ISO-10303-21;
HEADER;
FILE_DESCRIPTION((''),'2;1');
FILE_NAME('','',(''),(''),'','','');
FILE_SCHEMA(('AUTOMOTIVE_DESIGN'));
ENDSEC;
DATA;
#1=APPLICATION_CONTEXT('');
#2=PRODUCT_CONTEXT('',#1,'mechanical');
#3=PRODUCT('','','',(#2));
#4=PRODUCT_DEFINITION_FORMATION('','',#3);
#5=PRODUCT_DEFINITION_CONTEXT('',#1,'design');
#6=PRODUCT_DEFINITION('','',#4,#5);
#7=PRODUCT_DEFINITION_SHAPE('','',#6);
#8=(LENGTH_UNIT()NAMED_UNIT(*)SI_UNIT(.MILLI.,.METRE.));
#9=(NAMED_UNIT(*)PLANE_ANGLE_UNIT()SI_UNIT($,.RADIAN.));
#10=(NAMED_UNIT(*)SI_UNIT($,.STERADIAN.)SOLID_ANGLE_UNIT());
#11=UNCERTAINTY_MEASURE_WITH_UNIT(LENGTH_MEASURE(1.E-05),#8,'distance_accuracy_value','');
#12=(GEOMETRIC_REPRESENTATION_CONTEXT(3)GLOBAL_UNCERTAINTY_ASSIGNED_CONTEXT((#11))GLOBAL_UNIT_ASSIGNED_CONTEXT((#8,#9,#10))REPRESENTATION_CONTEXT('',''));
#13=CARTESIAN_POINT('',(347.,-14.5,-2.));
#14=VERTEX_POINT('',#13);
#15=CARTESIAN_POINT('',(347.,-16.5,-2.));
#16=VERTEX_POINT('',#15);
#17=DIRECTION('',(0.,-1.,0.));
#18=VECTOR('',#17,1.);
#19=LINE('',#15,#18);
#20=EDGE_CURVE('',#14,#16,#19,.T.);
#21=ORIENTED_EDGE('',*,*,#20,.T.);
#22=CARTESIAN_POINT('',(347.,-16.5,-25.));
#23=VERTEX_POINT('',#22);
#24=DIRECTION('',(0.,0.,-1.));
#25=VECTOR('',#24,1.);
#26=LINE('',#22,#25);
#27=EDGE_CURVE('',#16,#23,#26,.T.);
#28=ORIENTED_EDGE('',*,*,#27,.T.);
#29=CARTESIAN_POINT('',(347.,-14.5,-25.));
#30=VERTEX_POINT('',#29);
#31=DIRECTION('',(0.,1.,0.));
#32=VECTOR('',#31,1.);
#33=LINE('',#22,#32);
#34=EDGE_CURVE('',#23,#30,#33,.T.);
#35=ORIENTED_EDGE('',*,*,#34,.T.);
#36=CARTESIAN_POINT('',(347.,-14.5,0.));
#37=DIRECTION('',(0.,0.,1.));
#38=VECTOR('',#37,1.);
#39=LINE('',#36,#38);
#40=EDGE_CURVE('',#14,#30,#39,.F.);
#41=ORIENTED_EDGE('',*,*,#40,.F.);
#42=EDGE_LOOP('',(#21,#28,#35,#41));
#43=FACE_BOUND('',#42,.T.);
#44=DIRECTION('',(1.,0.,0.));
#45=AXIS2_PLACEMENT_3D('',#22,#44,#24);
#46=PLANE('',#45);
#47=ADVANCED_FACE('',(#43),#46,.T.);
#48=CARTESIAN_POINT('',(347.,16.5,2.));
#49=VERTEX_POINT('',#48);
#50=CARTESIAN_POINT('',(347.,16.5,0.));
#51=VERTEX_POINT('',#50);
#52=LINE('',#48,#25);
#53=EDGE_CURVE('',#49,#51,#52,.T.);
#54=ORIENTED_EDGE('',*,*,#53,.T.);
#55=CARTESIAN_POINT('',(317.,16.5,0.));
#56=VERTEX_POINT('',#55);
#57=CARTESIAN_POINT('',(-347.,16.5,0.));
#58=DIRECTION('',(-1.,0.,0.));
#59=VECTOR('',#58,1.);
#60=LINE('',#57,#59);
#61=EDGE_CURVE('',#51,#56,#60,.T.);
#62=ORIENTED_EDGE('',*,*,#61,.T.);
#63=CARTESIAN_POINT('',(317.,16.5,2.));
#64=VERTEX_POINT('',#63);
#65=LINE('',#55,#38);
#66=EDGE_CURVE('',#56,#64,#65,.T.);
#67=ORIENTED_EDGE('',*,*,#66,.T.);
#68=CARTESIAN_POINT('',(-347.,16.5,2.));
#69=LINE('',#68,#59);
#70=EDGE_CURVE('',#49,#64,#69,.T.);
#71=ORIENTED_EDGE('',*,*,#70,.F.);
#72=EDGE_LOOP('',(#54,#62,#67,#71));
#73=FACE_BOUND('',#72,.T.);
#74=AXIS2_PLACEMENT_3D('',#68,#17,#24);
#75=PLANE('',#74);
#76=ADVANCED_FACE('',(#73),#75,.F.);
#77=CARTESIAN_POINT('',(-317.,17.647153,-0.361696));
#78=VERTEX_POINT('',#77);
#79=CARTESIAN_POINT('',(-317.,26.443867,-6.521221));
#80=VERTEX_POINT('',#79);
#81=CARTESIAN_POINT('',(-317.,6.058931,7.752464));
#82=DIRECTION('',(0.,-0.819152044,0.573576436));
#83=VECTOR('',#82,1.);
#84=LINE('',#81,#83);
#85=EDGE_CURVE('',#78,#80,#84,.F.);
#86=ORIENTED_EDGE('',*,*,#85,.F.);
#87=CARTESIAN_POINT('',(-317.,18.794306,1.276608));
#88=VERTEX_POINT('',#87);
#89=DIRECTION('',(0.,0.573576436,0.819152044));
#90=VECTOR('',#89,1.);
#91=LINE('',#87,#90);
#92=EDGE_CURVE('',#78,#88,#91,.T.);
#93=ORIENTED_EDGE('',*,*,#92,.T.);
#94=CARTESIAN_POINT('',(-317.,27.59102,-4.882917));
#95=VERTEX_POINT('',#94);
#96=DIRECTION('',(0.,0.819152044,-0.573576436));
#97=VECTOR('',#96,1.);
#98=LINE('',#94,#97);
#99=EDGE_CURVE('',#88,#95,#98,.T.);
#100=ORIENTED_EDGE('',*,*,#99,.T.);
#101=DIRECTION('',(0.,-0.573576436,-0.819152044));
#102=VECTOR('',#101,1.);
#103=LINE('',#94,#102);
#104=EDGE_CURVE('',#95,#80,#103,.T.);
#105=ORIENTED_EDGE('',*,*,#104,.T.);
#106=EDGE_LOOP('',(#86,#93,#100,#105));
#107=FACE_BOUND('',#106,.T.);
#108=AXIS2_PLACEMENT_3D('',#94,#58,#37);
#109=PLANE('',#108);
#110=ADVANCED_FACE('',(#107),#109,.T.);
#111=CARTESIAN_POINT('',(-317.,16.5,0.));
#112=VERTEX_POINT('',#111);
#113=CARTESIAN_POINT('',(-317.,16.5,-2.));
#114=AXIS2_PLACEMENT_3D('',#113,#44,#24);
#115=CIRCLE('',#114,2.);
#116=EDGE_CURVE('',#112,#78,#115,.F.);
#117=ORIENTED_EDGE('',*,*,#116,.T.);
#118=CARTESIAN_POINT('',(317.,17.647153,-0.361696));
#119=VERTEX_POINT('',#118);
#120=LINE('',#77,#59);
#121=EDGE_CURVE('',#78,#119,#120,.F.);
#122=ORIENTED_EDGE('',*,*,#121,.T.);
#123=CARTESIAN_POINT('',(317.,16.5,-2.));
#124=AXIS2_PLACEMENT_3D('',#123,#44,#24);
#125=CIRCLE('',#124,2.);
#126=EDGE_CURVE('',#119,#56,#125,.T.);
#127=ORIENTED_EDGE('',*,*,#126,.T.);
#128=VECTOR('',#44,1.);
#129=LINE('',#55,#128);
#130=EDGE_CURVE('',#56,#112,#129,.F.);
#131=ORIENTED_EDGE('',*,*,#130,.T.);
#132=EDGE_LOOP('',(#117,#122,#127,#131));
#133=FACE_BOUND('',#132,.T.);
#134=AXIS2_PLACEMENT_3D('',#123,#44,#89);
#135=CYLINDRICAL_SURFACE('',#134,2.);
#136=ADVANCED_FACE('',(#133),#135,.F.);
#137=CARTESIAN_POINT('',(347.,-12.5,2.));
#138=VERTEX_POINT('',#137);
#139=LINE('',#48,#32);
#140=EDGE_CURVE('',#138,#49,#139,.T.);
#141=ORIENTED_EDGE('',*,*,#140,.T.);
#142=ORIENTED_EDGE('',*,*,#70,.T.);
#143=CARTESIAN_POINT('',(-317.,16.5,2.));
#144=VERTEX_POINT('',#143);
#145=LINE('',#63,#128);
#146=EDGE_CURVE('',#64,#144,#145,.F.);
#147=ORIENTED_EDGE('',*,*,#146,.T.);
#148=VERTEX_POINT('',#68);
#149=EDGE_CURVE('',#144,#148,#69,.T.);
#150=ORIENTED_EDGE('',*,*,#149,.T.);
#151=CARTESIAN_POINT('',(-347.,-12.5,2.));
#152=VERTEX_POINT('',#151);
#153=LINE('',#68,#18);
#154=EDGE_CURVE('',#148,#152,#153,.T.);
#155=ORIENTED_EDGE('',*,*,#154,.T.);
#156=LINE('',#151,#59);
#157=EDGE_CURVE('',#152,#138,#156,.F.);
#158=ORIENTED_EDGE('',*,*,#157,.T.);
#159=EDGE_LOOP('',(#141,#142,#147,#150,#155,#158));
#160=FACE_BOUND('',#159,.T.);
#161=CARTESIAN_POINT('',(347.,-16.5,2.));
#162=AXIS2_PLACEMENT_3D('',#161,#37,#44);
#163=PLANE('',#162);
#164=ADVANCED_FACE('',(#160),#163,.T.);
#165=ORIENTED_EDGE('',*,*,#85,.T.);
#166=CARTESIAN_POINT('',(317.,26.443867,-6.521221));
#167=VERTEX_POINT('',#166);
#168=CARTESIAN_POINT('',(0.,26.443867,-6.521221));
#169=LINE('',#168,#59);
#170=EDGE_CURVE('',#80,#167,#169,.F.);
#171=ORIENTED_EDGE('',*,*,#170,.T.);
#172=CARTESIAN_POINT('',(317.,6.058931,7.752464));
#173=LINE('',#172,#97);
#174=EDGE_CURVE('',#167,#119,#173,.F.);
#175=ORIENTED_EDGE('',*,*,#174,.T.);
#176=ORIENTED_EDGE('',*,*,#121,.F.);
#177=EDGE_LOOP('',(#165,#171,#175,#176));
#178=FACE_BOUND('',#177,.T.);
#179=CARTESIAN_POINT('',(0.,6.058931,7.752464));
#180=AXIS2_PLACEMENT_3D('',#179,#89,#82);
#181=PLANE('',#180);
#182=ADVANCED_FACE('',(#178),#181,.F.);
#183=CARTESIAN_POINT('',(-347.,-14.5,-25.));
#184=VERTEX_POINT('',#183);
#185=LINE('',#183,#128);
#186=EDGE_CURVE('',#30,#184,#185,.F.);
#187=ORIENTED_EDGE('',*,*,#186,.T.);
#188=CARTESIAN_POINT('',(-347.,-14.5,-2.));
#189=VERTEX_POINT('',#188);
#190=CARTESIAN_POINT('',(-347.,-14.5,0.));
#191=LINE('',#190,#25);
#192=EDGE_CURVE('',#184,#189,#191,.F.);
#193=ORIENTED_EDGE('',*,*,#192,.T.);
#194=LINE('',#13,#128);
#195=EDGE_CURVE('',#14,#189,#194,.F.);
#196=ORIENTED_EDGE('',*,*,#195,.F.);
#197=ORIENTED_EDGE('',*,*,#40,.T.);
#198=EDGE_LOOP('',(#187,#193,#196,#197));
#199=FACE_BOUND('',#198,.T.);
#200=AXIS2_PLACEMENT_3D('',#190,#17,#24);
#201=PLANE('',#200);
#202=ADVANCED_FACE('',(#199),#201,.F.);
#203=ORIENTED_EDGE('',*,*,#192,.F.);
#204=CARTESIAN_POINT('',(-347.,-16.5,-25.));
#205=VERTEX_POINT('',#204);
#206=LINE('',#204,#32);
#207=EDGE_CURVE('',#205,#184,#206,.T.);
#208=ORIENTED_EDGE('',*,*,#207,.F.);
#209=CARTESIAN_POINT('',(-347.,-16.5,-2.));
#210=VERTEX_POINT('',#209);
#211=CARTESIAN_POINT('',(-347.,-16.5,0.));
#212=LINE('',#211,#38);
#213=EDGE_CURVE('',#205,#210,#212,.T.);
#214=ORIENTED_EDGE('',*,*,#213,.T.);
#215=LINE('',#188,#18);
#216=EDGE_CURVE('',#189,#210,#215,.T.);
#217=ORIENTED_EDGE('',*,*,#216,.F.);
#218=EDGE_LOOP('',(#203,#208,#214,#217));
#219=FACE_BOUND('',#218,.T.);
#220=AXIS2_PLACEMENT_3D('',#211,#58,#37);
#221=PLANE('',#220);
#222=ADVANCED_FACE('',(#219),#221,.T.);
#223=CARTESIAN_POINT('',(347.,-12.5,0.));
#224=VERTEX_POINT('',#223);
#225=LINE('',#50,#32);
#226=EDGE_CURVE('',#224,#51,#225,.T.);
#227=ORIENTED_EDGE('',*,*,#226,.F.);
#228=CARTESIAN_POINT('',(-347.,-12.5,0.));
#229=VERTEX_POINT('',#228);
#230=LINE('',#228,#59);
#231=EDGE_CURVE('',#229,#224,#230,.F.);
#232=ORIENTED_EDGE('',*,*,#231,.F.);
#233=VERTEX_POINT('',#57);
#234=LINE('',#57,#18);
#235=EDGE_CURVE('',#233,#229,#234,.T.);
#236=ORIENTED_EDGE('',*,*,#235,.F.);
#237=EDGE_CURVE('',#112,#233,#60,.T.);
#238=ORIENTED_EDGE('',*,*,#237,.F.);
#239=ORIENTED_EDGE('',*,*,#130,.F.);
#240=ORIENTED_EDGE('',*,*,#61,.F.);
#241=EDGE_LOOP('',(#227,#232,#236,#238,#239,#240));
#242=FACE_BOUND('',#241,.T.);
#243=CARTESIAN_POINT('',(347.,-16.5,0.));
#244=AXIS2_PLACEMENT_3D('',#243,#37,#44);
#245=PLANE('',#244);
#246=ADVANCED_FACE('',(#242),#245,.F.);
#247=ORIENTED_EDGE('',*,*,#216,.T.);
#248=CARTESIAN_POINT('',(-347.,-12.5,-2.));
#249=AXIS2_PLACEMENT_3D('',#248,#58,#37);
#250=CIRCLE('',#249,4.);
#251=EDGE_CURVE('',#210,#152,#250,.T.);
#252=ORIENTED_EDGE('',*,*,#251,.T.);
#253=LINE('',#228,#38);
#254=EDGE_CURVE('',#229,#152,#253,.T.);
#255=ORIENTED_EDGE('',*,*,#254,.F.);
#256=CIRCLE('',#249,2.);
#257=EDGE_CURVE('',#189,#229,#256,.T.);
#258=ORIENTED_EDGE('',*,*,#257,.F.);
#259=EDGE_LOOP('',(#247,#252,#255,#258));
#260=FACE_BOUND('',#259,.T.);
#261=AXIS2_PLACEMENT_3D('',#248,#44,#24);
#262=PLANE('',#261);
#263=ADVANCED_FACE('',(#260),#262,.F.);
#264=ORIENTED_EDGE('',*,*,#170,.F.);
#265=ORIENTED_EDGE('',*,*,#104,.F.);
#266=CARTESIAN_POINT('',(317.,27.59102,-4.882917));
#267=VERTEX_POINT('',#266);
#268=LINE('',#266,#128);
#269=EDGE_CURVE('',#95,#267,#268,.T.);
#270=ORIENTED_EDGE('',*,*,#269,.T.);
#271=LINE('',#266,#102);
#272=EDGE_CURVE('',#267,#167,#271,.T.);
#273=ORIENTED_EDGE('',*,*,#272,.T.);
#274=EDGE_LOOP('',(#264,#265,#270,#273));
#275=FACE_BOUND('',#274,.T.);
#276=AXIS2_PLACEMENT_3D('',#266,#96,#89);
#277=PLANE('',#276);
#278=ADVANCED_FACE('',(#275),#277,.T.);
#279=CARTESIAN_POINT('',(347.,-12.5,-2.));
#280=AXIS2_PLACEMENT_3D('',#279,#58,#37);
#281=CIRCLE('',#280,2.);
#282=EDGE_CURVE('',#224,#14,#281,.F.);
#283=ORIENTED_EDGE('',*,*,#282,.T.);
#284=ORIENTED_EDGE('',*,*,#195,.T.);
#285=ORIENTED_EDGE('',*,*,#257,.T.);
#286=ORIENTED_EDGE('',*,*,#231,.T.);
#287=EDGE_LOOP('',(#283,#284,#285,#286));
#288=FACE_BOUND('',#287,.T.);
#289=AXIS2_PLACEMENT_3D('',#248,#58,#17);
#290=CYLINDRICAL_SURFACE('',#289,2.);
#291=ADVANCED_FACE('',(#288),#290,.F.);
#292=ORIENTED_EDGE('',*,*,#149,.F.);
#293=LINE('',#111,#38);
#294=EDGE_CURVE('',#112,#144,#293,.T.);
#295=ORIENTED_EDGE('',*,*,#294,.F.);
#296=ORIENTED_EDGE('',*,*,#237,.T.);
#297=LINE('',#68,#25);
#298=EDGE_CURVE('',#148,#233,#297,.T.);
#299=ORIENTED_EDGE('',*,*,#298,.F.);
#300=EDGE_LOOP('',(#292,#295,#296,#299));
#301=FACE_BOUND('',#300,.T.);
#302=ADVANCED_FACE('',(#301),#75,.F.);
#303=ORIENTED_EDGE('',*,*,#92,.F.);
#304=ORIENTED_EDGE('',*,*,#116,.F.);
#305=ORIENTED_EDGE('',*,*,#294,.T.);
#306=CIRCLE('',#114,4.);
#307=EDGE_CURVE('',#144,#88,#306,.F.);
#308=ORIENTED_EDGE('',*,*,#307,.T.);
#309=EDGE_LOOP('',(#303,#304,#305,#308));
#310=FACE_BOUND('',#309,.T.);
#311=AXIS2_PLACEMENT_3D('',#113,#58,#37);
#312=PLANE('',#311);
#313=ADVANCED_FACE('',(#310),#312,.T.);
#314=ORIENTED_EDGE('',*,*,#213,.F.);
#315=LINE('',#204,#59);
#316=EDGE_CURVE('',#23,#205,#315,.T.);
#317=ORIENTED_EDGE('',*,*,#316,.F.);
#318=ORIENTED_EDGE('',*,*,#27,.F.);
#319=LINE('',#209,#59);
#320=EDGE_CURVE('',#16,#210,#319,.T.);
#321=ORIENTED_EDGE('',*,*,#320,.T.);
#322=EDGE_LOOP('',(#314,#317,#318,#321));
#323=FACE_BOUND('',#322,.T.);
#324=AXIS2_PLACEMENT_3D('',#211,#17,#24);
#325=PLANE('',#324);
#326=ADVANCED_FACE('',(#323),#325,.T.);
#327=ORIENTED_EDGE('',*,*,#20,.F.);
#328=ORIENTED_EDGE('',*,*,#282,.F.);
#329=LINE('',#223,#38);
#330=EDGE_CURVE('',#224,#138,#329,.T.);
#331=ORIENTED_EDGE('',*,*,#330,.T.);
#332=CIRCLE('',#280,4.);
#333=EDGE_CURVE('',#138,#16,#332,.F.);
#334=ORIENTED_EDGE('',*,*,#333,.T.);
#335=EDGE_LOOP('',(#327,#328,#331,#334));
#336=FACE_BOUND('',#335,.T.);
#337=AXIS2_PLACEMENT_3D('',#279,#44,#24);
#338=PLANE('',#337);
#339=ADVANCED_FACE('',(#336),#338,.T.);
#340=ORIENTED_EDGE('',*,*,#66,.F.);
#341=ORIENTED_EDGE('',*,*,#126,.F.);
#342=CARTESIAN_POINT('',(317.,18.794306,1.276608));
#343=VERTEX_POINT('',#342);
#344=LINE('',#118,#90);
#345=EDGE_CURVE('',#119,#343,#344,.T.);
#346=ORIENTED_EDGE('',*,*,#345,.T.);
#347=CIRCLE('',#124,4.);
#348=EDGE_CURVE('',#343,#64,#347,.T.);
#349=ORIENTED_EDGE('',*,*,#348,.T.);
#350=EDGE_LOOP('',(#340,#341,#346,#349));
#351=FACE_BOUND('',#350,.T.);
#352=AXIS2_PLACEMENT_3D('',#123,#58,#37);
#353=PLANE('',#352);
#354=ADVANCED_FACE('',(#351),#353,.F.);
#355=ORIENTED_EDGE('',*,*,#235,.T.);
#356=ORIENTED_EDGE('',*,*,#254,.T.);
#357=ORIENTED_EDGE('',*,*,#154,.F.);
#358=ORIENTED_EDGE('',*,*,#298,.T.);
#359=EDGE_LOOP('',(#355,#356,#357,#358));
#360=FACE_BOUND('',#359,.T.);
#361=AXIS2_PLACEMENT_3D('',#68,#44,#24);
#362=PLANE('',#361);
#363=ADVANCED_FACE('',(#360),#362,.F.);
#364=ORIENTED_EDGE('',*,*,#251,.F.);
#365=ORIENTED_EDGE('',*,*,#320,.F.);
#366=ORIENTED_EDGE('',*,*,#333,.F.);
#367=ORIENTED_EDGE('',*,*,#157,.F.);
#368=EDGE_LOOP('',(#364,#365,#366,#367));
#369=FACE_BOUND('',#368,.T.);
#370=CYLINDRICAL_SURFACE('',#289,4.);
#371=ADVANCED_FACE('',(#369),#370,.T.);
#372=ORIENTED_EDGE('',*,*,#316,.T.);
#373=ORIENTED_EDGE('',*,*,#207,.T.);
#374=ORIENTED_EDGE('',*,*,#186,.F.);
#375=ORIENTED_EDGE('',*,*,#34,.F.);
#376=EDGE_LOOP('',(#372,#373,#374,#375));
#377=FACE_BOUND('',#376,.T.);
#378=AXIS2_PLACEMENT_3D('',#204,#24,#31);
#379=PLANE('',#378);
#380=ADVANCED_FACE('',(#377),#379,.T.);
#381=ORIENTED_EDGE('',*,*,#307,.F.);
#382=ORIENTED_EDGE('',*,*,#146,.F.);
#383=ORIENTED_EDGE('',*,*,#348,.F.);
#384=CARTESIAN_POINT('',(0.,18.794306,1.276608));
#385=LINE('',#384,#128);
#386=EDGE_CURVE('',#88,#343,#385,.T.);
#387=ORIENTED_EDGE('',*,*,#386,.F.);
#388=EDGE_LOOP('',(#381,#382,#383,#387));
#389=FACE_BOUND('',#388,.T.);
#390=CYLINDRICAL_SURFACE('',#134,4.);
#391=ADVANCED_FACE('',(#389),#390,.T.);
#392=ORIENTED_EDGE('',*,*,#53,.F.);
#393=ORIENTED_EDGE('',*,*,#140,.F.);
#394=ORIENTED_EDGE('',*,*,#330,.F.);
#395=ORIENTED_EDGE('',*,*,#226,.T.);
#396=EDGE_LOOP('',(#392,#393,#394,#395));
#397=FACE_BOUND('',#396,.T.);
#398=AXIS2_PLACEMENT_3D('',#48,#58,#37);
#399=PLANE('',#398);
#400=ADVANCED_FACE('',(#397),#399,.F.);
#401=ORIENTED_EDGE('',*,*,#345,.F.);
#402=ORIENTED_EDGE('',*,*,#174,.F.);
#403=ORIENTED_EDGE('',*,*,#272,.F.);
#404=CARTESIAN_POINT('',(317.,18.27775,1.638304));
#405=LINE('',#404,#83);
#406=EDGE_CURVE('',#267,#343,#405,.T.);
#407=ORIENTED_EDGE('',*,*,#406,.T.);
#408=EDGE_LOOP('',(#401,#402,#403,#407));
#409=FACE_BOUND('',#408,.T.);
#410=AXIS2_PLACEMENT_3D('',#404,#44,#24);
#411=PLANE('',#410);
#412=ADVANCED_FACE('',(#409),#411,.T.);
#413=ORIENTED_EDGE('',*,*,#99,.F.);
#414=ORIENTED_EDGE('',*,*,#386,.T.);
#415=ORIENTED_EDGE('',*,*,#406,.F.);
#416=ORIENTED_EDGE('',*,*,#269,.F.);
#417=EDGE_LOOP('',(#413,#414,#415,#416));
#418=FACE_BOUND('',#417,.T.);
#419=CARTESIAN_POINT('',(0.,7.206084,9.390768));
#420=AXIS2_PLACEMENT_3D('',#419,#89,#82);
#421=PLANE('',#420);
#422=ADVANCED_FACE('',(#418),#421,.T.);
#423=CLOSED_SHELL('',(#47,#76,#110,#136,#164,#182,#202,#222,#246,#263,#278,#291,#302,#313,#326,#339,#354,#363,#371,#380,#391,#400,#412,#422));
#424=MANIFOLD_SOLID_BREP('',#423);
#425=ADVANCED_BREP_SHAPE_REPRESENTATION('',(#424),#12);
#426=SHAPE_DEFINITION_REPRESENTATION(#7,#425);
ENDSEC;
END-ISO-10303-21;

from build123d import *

# Parameters (mm, degrees)
SKETCH1_W                    = 694
SKETCH1_H                    = 33
BASE_FLANGE1_DEPTH           = 2
EDGE_FLANGE1_STRIP_W         = 12
EDGE_FLANGE1_STRIP_H         = 2
EDGE_FLANGE1_STRIP_CUT_DEPTH = 694
EDGE_FLANGE1_DEPTH           = 694
EDGE_FLANGE2_DEPTH           = 634


# Sheet-metal steps are written as plain solids
with BuildPart() as part:
    # Sketch1 → Base-Flange1 (new body)
    with BuildSketch(Plane.XY):
        Rectangle(SKETCH1_W, SKETCH1_H)
    extrude(amount=BASE_FLANGE1_DEPTH)

    # Edge-Flange1 strip (across the edge) → Edge-Flange1 strip cut (cut)
    with BuildSketch(Plane(origin=(347, -16.5, 0), x_dir=(0, 1, 0), z_dir=(-1, 0, 0))):
        with Locations((-2, -1)):
            Rectangle(EDGE_FLANGE1_STRIP_W, EDGE_FLANGE1_STRIP_H)
    extrude(amount=EDGE_FLANGE1_STRIP_CUT_DEPTH, mode=Mode.SUBTRACT)

    # Edge-Flange1 section (across the edge) → Edge-Flange1 (add)
    with BuildSketch(Plane(origin=(347, -16.5, 0), x_dir=(0, 1, 0), z_dir=(-1, 0, 0))):
        with BuildLine():
            Line((0, 2), (0, 25))
            Line((0, 25), (2, 25))
            Line((2, 25), (2, 2))
            ThreePointArc((2, 2), (2.585786438, 0.585786438), (4, 0))
            Line((4, 0), (4, -2))
            ThreePointArc((4, -2), (1.171572875, -0.828427125), (0, 2))
        make_face()
    extrude(amount=EDGE_FLANGE1_DEPTH)

    # Edge-Flange2 section (across the edge) → Edge-Flange2 (add)
    with BuildSketch(Plane(origin=(-317, 17.130597578, 0), x_dir=(0, -0.5735764363510416, -0.8191520442889949), z_dir=(1, 0, 0))):
        with BuildLine():
            Line((-2, 0.630597578), (-2, 11.369402422))
            Line((-2, 11.369402422), (0, 11.369402422))
            Line((0, 11.369402422), (0, 0.630597578))
            ThreePointArc((0, 0.630597578), (0.092566099, 0.029185979), (0.361695911, -0.516555295))
            Line((0.361695911, -0.516555295), (-1.276608177, -1.663708168))
            ThreePointArc((-1.276608177, -1.663708168), (-1.814867803, -0.57222562), (-2, 0.630597578))
        make_face()
    extrude(amount=EDGE_FLANGE2_DEPTH)


solid = part.part
